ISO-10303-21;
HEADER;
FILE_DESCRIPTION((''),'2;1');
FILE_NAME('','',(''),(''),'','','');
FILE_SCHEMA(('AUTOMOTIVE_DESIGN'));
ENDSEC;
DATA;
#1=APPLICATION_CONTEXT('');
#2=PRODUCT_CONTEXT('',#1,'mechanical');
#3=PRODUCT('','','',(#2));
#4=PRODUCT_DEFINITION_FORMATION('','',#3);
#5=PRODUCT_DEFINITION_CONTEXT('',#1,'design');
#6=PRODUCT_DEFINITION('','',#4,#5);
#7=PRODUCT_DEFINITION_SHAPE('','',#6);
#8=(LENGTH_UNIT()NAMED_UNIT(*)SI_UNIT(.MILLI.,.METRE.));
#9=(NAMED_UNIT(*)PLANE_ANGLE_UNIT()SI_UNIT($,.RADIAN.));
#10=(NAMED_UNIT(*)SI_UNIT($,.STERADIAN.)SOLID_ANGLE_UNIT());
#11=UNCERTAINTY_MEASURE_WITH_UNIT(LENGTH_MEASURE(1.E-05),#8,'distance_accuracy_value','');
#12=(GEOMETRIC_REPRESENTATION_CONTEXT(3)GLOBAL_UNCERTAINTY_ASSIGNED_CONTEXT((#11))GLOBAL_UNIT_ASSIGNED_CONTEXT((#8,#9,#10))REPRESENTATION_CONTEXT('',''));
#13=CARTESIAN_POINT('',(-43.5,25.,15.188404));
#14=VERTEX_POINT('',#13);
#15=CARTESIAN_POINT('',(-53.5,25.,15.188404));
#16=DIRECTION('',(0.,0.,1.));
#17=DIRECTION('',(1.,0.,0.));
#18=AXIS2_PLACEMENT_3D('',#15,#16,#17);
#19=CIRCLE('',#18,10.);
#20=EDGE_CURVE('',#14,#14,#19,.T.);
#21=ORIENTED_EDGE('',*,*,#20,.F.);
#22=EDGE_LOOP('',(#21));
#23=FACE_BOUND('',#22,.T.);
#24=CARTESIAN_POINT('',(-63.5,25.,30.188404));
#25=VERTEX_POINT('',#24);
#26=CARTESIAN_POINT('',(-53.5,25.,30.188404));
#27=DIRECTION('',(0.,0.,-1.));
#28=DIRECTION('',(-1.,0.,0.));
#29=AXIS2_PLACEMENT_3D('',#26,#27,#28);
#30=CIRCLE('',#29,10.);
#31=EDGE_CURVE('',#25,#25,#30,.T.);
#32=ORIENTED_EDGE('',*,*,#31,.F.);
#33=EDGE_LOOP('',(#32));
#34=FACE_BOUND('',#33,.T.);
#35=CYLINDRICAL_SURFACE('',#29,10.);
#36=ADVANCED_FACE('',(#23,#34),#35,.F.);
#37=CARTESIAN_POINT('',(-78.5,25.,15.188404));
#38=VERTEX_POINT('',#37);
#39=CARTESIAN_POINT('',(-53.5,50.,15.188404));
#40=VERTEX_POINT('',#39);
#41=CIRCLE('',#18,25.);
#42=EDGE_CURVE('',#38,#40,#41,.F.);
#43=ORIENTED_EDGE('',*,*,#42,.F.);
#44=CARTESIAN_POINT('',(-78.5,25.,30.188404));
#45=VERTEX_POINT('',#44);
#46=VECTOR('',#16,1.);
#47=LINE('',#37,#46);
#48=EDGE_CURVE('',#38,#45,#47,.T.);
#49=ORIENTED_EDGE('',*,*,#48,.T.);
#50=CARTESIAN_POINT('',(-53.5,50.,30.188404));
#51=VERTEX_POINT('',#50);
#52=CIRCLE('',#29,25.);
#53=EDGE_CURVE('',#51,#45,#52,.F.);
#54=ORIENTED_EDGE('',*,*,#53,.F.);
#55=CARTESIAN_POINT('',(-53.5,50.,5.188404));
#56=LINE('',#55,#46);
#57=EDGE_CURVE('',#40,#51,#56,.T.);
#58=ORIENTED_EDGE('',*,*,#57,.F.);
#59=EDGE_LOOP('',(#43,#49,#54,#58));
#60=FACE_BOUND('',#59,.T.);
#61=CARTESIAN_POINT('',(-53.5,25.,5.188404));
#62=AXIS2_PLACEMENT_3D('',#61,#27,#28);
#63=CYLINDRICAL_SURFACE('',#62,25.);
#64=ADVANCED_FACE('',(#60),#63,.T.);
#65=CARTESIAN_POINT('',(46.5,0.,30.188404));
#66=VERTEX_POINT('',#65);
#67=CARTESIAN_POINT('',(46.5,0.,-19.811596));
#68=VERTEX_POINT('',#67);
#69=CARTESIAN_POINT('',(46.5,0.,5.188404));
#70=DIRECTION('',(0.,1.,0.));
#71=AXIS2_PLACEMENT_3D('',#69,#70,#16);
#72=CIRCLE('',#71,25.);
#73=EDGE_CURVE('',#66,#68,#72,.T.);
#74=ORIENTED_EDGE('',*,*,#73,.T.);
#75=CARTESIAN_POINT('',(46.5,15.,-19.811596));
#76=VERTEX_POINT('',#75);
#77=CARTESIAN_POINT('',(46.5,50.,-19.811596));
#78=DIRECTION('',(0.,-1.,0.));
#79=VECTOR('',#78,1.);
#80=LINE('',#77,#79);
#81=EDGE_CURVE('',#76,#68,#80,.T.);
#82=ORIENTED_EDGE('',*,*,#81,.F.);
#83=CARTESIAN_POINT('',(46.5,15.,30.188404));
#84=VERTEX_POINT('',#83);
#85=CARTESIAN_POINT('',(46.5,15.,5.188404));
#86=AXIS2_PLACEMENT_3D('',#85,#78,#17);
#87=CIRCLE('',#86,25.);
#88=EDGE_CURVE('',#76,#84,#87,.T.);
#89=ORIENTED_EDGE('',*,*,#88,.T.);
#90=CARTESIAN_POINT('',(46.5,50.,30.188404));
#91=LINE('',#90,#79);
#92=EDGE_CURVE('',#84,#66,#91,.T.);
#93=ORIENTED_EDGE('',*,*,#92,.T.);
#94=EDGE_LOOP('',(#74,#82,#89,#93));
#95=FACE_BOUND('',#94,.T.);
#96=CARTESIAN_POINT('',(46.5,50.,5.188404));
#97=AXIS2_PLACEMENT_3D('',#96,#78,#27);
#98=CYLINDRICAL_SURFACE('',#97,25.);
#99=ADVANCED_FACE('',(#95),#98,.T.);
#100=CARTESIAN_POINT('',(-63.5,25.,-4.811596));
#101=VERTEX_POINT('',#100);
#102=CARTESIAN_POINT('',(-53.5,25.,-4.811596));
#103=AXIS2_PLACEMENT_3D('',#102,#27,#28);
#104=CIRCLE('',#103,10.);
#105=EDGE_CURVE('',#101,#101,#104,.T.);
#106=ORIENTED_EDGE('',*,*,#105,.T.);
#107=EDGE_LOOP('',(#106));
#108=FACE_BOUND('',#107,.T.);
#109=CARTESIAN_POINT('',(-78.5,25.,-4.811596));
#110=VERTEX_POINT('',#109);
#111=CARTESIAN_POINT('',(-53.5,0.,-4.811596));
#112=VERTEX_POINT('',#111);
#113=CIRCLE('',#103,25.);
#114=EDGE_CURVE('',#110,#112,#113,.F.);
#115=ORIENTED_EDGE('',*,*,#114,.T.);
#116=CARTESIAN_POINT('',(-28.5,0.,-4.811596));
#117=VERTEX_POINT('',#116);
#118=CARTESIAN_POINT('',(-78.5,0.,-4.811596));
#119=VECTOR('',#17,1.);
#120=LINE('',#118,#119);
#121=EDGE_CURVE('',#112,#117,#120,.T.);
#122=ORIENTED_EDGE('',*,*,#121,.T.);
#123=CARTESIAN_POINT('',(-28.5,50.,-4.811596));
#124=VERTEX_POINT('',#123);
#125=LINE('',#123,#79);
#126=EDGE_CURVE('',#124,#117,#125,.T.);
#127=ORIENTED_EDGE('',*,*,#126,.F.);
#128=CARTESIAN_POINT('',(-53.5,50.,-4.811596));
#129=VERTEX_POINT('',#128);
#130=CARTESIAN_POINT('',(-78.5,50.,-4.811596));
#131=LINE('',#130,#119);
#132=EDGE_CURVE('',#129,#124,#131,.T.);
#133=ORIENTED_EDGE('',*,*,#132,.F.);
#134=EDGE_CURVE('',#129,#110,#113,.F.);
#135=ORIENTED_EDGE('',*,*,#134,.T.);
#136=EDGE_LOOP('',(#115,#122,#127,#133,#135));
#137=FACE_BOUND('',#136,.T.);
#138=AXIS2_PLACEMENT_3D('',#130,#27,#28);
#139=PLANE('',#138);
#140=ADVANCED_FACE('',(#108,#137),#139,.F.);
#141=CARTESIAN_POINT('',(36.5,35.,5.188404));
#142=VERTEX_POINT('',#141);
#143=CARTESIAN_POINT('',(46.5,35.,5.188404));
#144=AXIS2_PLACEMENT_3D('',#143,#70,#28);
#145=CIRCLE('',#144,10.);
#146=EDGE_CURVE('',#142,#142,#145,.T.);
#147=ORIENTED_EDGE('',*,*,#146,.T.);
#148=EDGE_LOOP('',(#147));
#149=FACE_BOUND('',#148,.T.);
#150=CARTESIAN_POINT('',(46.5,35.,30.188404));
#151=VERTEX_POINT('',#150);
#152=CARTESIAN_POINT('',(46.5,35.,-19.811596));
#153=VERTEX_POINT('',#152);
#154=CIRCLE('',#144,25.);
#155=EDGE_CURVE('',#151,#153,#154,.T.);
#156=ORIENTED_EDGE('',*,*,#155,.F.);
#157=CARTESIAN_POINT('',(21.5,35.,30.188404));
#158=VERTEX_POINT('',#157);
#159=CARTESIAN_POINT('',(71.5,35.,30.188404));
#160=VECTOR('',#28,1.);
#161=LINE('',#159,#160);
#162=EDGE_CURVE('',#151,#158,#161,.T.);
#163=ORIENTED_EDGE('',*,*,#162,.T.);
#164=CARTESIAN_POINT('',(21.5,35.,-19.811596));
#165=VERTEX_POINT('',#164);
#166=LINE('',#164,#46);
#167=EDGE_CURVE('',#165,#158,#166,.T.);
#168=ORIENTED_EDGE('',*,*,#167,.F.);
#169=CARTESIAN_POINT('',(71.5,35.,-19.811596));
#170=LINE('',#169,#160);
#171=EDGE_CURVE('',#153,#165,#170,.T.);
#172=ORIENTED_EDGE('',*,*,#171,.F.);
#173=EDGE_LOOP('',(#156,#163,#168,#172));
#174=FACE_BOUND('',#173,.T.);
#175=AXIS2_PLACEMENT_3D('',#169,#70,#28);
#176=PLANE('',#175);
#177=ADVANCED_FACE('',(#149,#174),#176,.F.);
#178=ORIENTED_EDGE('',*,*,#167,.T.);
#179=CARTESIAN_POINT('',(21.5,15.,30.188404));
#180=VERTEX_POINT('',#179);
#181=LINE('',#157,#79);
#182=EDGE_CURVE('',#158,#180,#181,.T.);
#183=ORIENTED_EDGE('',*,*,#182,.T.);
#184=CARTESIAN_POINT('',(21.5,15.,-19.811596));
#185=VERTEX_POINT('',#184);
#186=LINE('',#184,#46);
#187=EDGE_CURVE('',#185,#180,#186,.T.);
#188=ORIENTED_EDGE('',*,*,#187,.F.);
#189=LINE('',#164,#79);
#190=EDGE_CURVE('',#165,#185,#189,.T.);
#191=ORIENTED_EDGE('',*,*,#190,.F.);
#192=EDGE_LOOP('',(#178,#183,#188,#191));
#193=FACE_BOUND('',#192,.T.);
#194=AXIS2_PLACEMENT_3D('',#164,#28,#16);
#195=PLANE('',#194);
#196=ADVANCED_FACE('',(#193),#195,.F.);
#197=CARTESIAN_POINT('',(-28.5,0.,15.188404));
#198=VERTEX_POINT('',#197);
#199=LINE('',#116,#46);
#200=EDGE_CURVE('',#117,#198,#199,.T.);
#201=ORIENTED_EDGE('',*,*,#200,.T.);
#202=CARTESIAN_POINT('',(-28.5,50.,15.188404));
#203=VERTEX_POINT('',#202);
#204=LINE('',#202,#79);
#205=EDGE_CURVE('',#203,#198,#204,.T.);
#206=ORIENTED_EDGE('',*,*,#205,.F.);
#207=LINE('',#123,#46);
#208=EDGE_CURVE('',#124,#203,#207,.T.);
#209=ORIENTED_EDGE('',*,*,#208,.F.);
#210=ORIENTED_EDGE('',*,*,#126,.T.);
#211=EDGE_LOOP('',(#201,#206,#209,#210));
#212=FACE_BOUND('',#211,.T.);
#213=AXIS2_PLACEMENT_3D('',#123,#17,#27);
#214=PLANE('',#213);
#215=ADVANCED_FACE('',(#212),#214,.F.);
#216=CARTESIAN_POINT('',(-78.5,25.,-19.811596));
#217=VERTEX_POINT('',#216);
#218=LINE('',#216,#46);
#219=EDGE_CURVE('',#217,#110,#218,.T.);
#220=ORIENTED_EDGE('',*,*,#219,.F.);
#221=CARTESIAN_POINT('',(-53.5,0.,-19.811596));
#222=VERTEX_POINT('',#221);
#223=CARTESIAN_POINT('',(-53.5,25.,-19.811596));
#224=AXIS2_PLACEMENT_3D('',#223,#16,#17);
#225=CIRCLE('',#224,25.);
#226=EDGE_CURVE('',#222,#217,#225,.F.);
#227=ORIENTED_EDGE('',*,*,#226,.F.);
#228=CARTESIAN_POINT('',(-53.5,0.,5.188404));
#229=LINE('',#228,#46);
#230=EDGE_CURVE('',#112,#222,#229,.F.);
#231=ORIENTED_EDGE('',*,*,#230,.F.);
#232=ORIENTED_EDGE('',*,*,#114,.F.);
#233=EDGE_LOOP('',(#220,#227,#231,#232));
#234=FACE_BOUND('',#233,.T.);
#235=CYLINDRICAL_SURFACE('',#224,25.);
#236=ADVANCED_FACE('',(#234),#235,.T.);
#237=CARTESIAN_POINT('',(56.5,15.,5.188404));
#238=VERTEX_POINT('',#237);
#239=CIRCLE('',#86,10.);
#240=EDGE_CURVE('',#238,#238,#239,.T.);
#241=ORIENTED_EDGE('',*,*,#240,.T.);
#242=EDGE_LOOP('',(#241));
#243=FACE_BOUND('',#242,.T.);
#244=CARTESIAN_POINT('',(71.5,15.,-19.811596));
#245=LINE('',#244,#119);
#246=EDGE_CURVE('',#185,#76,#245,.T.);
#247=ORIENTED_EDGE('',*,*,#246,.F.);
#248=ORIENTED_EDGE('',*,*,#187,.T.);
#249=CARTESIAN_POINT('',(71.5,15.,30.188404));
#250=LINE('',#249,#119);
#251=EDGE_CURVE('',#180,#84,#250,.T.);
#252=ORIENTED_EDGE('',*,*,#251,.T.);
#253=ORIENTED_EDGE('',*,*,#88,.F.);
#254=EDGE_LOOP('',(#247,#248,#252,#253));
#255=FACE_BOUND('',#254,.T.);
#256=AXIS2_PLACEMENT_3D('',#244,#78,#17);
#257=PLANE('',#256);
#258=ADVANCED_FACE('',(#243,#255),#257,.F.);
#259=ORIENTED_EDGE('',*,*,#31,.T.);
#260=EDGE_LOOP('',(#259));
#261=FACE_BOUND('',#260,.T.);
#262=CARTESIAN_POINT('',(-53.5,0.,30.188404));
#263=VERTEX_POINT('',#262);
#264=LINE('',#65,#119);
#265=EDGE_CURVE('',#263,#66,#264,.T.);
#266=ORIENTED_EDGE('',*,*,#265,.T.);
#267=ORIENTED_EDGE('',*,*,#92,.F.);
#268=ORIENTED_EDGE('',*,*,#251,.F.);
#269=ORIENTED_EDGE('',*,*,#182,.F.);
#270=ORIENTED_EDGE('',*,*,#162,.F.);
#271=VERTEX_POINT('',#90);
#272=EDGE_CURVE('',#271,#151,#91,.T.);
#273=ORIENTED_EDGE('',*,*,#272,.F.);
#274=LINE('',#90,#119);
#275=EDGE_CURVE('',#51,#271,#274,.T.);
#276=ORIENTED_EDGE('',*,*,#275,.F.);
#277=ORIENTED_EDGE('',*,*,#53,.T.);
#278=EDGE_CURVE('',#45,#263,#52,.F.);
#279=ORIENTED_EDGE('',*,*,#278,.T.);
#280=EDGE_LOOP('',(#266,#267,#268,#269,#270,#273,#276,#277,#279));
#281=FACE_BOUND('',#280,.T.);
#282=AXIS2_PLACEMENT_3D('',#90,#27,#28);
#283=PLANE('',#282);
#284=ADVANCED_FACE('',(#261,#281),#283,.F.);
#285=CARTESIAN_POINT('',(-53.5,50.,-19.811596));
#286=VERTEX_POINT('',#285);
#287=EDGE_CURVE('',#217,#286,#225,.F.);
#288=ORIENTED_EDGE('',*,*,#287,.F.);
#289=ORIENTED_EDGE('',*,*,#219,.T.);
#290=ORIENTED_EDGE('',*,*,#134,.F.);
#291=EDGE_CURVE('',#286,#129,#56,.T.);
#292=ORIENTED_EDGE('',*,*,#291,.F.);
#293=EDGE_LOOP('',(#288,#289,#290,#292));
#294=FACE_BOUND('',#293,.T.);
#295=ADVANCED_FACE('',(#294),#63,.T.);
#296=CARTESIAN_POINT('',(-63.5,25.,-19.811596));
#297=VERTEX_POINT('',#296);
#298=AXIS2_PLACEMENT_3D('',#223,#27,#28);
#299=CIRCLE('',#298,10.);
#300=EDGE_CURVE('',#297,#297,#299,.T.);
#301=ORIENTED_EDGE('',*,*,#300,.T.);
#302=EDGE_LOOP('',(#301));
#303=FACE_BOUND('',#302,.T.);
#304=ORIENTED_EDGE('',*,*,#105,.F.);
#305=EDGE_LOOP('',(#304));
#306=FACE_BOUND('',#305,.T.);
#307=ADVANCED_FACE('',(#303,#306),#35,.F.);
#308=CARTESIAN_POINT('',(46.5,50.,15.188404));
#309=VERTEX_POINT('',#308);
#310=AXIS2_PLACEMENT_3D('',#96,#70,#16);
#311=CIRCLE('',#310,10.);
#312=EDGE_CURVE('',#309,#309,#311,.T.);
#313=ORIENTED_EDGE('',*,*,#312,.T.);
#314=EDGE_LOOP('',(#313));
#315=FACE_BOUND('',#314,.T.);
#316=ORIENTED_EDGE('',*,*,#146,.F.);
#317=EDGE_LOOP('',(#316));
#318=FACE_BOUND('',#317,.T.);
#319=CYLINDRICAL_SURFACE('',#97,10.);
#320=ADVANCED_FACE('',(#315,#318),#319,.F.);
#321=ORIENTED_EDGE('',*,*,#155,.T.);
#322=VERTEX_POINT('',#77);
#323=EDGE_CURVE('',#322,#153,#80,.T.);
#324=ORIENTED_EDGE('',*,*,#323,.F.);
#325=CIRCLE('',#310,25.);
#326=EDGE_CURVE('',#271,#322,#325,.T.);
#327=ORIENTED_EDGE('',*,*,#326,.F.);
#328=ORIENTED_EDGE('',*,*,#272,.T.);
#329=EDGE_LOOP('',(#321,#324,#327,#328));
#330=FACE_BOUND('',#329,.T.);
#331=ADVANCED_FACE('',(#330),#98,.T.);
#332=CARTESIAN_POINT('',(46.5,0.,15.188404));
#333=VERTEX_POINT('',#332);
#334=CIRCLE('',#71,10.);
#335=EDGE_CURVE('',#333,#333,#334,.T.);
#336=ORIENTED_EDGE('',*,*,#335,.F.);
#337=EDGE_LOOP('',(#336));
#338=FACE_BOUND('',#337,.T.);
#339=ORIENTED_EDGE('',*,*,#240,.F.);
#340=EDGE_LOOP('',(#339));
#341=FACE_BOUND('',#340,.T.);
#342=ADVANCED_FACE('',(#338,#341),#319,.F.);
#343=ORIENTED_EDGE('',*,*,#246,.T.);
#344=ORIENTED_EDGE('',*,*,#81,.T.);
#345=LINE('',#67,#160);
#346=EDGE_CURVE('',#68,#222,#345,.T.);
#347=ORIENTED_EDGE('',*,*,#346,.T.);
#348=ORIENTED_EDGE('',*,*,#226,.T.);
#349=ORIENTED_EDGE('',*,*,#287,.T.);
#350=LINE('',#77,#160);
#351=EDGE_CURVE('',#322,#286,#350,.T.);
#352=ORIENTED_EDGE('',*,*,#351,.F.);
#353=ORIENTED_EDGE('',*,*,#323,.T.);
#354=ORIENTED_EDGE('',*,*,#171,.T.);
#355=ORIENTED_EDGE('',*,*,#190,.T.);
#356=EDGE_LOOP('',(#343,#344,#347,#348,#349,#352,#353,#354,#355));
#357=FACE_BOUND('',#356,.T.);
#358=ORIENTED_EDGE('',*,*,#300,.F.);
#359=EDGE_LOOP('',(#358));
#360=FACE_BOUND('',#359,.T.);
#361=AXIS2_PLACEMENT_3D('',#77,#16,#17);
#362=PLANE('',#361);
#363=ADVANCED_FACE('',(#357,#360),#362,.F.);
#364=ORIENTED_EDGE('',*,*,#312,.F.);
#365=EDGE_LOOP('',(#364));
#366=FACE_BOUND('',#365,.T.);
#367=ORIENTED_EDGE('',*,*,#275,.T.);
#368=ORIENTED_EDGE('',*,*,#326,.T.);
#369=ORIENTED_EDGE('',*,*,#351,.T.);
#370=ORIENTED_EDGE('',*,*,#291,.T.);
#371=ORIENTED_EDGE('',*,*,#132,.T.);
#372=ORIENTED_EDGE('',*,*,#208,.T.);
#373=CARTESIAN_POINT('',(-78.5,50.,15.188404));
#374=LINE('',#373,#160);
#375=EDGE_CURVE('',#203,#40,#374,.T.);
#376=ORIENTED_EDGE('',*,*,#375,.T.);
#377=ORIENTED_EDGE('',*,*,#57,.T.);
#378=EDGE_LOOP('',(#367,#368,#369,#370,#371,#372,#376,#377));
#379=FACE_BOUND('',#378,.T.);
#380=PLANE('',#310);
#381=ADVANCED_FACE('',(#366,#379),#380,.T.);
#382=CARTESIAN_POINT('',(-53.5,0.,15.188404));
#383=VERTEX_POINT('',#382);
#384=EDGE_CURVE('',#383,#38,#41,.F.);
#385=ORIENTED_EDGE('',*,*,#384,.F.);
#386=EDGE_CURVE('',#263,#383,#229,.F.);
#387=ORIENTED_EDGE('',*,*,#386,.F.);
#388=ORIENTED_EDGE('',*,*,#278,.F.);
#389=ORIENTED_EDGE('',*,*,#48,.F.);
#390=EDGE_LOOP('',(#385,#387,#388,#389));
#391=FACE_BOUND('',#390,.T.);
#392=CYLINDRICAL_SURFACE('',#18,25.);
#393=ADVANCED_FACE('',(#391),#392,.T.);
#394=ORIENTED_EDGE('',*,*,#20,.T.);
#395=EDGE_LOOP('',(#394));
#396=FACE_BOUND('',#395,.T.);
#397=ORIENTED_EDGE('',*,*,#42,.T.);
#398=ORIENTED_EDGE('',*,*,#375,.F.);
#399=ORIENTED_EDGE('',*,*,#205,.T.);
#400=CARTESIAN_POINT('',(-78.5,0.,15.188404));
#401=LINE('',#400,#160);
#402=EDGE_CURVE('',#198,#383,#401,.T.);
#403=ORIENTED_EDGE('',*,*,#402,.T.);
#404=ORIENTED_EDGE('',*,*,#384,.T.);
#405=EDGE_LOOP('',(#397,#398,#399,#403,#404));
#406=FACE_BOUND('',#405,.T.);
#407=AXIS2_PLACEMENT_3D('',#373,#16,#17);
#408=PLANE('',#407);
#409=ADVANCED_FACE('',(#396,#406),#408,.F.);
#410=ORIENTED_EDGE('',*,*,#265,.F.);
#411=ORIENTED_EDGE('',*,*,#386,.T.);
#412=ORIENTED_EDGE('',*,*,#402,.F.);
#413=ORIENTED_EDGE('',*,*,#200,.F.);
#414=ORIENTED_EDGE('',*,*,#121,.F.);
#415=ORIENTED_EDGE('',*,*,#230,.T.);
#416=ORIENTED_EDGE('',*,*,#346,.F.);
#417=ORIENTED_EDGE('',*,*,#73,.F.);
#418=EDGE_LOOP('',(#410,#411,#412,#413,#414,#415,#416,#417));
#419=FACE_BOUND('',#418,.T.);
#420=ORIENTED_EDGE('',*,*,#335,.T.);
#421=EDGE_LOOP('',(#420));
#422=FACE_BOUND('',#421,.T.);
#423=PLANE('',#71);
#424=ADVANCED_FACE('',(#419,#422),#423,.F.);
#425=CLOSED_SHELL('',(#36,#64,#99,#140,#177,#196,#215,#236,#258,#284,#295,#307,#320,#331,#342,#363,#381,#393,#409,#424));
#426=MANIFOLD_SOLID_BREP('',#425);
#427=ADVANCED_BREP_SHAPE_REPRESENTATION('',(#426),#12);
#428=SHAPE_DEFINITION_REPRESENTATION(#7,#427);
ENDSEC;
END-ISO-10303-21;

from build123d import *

# Parameters (mm, degrees)
SKETCH1_R           = 10
BOSS_EXTRUDE1_DEPTH = 50
SKETCH2_W           = 50
SKETCH2_H           = 20
CUT_EXTRUDE1_DEPTH  = 106.651549918
FILLET1_R           = 25
FILLET2_R           = 25
FILLET3_R           = 25
FILLET4_R           = 25
SKETCH3_R           = 10
CUT_EXTRUDE2_DEPTH  = 106.651549918


with BuildPart() as part:
    # Sketch1 → Boss-Extrude1 (new body)
    with BuildSketch(Plane(origin=(0, 0, 0), x_dir=(1, 0, 0), z_dir=(0, 1, 0))):
        with BuildLine():
            Line((-78.5, -15.188404139), (-78.5, -30.188404139))
            Line((-78.5, -30.188404139), (46.5, -30.188404139))
            ThreePointArc((46.5, -30.188404139), (71.5, -5.188404139), (46.5, 19.811595861))
            Line((46.5, 19.811595861), (-78.5, 19.811595861))
            Line((-78.5, 19.811595861), (-78.5, 4.811595861))
            Line((-78.5, 4.811595861), (-28.5, 4.811595861))
            Line((-28.5, 4.811595861), (-28.5, -15.188404139))
            Line((-28.5, -15.188404139), (-78.5, -15.188404139))
        make_face()
        with Locations(Location((46.5, -5.188404139, 0), (0, 0, 270))):
            Circle(SKETCH1_R, mode=Mode.SUBTRACT)
    extrude(amount=BOSS_EXTRUDE1_DEPTH)

    # Sketch2 → Cut-Extrude1 (cut, through all)
    with BuildSketch(Plane.XY.offset(30.188404139)):
        with Locations((46.5, 25)):
            Rectangle(SKETCH2_W, SKETCH2_H)
    extrude(amount=-CUT_EXTRUDE1_DEPTH, mode=Mode.SUBTRACT)

    # Fillet1
    fillet1_edges = [part.edges().sort_by_distance(p)[0] for p in [
        (-78.5, 0, -12.311595861),
    ]]
    fillet(fillet1_edges, radius=FILLET1_R)

    # Fillet2
    fillet2_edges = [part.edges().sort_by_distance(p)[0] for p in [
        (-78.5, 0, 22.688404139),
    ]]
    fillet(fillet2_edges, radius=FILLET2_R)

    # Fillet3
    fillet3_edges = [part.edges().sort_by_distance(p)[0] for p in [
        (-78.5, 50, 22.688404139),
    ]]
    fillet(fillet3_edges, radius=FILLET3_R - 0.0001)  # a hair under: the kernel refuses the full size

    # Fillet4
    fillet4_edges = [part.edges().sort_by_distance(p)[0] for p in [
        (-78.5, 50, -12.311595861),
    ]]
    fillet(fillet4_edges, radius=FILLET4_R - 0.0001)  # a hair under: the kernel refuses the full size

    # Sketch3 → Cut-Extrude2 (cut, through all)
    with BuildSketch(Plane(origin=(0, 0, -19.811595861), x_dir=(-1, 0, 0), z_dir=(0, 0, -1))):
        with Locations((53.5, 25)):
            Circle(SKETCH3_R)
    extrude(amount=-CUT_EXTRUDE2_DEPTH, mode=Mode.SUBTRACT)


solid = part.part
